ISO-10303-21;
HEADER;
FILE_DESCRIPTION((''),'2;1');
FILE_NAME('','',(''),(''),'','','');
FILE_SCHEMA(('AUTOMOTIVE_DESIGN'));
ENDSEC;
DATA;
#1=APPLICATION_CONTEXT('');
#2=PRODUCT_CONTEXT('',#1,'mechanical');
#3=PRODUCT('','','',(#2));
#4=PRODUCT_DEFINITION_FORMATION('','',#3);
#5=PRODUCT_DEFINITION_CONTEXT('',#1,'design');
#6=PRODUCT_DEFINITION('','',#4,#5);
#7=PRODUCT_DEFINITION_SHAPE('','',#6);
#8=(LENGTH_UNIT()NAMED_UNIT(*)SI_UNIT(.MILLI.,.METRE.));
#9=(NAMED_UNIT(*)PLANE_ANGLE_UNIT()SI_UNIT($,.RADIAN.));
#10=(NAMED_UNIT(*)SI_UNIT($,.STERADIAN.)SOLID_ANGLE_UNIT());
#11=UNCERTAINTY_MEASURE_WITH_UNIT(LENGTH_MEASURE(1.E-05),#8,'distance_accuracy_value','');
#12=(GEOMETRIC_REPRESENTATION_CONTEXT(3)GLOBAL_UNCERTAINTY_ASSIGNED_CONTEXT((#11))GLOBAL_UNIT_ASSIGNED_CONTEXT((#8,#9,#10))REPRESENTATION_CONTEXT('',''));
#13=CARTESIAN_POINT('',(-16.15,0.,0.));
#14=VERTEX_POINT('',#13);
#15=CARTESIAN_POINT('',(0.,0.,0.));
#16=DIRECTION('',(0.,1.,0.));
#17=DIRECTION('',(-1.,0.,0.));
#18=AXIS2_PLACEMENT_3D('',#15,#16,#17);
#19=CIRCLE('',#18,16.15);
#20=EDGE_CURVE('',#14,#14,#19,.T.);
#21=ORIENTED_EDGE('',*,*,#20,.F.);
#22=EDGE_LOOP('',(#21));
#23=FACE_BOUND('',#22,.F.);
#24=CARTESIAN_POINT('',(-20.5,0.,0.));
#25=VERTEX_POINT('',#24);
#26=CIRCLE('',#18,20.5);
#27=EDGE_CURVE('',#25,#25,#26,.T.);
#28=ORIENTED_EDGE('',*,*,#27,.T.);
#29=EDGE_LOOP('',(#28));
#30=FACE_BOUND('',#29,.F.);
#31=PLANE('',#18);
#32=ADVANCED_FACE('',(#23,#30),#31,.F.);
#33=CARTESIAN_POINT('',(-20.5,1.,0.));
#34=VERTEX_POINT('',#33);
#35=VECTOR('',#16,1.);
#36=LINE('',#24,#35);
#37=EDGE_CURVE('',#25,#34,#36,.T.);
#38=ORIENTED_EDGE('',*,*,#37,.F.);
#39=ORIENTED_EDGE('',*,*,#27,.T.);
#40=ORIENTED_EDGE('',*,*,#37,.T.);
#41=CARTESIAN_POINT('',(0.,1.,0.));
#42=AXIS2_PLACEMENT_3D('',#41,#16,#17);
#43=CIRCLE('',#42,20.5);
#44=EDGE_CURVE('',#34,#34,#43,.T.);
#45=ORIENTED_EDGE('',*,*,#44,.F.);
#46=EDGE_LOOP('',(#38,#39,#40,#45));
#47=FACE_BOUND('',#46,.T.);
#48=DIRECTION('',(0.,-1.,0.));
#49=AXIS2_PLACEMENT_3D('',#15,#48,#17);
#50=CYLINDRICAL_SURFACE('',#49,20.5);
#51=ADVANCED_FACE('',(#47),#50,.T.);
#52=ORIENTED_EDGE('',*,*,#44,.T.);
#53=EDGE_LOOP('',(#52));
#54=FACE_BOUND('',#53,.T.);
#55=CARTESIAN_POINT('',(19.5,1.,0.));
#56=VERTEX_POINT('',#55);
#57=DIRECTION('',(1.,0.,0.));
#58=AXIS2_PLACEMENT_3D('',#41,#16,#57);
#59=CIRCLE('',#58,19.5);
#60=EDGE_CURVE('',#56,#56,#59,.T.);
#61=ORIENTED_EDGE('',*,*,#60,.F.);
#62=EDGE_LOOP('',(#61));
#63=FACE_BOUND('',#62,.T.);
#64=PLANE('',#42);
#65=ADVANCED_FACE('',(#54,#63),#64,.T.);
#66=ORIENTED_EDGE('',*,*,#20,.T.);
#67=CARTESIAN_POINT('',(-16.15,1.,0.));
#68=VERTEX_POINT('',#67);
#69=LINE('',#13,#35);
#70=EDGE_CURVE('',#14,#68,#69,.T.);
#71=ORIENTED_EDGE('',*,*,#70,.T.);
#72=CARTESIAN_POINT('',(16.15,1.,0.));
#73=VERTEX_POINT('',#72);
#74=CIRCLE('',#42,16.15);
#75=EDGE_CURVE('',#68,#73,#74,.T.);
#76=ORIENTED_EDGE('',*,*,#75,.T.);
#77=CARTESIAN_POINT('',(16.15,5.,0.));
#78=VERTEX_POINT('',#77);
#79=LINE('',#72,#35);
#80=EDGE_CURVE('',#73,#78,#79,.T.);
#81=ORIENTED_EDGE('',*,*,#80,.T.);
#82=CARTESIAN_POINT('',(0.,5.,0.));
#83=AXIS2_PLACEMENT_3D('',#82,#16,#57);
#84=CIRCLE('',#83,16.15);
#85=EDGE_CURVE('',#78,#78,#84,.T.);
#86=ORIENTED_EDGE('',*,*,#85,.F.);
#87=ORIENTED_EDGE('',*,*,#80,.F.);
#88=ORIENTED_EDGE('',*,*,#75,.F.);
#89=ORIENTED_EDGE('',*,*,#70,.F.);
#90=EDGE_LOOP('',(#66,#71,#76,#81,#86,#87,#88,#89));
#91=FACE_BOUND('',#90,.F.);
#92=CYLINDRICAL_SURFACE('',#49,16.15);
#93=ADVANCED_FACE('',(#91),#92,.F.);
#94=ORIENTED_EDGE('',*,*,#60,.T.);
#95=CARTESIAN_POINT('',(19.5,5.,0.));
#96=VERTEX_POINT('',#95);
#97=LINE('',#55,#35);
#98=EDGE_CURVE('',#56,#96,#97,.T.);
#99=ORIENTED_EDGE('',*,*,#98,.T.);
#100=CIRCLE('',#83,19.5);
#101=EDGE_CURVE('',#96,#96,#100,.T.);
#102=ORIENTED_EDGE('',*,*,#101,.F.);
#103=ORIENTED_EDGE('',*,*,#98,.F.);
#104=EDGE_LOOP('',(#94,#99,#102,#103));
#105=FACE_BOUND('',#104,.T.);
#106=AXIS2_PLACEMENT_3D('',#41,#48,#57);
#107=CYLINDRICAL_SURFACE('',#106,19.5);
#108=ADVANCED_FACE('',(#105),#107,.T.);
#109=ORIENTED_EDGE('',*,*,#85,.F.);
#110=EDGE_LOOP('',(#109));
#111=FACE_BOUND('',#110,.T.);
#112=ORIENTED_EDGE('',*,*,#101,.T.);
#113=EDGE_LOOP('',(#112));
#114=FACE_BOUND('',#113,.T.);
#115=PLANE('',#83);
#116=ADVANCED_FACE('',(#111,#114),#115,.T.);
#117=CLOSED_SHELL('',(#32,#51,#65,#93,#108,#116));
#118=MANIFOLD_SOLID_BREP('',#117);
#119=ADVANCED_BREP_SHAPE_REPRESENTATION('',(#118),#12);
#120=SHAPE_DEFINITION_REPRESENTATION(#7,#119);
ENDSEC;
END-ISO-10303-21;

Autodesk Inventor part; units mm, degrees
ref_plane "YZ Plane" through (0, 0, 0) normal (1, 0, 0) x (0, 1, 0)
ref_plane "XZ Plane" through (0, 0, 0) normal (0, 1, 0) x (-1, 0, 0)
ref_plane "XY Plane" through (0, 0, 0) normal (0, 0, 1) x (1, 0, 0)
sketch "Sketch1" plane through (0, 0, 0) normal (0, 1, 0) x (-1, 0, 0)
  circle A0 centre (0, 0) radius 20.5
  circle A1 centre (0, 0) radius 16.15
  dimension "d0" = 41
  dimension "d1" = 32.3
extrude "Extrusion1" add sketch "Sketch1" along normal blind 1
sketch "Sketch2" plane through (0, 1, 0) normal (0, 1, 0) x (1, 0, 0)
  circle A0 centre (0, 0) radius 19.5
  circle A1 centre (0, 0) radius 16.15 projected
  dimension "d4" = 39
extrude "Extrusion2" add sketch "Sketch2" along normal blind 4
properties part number "32mmFakeBearing"
